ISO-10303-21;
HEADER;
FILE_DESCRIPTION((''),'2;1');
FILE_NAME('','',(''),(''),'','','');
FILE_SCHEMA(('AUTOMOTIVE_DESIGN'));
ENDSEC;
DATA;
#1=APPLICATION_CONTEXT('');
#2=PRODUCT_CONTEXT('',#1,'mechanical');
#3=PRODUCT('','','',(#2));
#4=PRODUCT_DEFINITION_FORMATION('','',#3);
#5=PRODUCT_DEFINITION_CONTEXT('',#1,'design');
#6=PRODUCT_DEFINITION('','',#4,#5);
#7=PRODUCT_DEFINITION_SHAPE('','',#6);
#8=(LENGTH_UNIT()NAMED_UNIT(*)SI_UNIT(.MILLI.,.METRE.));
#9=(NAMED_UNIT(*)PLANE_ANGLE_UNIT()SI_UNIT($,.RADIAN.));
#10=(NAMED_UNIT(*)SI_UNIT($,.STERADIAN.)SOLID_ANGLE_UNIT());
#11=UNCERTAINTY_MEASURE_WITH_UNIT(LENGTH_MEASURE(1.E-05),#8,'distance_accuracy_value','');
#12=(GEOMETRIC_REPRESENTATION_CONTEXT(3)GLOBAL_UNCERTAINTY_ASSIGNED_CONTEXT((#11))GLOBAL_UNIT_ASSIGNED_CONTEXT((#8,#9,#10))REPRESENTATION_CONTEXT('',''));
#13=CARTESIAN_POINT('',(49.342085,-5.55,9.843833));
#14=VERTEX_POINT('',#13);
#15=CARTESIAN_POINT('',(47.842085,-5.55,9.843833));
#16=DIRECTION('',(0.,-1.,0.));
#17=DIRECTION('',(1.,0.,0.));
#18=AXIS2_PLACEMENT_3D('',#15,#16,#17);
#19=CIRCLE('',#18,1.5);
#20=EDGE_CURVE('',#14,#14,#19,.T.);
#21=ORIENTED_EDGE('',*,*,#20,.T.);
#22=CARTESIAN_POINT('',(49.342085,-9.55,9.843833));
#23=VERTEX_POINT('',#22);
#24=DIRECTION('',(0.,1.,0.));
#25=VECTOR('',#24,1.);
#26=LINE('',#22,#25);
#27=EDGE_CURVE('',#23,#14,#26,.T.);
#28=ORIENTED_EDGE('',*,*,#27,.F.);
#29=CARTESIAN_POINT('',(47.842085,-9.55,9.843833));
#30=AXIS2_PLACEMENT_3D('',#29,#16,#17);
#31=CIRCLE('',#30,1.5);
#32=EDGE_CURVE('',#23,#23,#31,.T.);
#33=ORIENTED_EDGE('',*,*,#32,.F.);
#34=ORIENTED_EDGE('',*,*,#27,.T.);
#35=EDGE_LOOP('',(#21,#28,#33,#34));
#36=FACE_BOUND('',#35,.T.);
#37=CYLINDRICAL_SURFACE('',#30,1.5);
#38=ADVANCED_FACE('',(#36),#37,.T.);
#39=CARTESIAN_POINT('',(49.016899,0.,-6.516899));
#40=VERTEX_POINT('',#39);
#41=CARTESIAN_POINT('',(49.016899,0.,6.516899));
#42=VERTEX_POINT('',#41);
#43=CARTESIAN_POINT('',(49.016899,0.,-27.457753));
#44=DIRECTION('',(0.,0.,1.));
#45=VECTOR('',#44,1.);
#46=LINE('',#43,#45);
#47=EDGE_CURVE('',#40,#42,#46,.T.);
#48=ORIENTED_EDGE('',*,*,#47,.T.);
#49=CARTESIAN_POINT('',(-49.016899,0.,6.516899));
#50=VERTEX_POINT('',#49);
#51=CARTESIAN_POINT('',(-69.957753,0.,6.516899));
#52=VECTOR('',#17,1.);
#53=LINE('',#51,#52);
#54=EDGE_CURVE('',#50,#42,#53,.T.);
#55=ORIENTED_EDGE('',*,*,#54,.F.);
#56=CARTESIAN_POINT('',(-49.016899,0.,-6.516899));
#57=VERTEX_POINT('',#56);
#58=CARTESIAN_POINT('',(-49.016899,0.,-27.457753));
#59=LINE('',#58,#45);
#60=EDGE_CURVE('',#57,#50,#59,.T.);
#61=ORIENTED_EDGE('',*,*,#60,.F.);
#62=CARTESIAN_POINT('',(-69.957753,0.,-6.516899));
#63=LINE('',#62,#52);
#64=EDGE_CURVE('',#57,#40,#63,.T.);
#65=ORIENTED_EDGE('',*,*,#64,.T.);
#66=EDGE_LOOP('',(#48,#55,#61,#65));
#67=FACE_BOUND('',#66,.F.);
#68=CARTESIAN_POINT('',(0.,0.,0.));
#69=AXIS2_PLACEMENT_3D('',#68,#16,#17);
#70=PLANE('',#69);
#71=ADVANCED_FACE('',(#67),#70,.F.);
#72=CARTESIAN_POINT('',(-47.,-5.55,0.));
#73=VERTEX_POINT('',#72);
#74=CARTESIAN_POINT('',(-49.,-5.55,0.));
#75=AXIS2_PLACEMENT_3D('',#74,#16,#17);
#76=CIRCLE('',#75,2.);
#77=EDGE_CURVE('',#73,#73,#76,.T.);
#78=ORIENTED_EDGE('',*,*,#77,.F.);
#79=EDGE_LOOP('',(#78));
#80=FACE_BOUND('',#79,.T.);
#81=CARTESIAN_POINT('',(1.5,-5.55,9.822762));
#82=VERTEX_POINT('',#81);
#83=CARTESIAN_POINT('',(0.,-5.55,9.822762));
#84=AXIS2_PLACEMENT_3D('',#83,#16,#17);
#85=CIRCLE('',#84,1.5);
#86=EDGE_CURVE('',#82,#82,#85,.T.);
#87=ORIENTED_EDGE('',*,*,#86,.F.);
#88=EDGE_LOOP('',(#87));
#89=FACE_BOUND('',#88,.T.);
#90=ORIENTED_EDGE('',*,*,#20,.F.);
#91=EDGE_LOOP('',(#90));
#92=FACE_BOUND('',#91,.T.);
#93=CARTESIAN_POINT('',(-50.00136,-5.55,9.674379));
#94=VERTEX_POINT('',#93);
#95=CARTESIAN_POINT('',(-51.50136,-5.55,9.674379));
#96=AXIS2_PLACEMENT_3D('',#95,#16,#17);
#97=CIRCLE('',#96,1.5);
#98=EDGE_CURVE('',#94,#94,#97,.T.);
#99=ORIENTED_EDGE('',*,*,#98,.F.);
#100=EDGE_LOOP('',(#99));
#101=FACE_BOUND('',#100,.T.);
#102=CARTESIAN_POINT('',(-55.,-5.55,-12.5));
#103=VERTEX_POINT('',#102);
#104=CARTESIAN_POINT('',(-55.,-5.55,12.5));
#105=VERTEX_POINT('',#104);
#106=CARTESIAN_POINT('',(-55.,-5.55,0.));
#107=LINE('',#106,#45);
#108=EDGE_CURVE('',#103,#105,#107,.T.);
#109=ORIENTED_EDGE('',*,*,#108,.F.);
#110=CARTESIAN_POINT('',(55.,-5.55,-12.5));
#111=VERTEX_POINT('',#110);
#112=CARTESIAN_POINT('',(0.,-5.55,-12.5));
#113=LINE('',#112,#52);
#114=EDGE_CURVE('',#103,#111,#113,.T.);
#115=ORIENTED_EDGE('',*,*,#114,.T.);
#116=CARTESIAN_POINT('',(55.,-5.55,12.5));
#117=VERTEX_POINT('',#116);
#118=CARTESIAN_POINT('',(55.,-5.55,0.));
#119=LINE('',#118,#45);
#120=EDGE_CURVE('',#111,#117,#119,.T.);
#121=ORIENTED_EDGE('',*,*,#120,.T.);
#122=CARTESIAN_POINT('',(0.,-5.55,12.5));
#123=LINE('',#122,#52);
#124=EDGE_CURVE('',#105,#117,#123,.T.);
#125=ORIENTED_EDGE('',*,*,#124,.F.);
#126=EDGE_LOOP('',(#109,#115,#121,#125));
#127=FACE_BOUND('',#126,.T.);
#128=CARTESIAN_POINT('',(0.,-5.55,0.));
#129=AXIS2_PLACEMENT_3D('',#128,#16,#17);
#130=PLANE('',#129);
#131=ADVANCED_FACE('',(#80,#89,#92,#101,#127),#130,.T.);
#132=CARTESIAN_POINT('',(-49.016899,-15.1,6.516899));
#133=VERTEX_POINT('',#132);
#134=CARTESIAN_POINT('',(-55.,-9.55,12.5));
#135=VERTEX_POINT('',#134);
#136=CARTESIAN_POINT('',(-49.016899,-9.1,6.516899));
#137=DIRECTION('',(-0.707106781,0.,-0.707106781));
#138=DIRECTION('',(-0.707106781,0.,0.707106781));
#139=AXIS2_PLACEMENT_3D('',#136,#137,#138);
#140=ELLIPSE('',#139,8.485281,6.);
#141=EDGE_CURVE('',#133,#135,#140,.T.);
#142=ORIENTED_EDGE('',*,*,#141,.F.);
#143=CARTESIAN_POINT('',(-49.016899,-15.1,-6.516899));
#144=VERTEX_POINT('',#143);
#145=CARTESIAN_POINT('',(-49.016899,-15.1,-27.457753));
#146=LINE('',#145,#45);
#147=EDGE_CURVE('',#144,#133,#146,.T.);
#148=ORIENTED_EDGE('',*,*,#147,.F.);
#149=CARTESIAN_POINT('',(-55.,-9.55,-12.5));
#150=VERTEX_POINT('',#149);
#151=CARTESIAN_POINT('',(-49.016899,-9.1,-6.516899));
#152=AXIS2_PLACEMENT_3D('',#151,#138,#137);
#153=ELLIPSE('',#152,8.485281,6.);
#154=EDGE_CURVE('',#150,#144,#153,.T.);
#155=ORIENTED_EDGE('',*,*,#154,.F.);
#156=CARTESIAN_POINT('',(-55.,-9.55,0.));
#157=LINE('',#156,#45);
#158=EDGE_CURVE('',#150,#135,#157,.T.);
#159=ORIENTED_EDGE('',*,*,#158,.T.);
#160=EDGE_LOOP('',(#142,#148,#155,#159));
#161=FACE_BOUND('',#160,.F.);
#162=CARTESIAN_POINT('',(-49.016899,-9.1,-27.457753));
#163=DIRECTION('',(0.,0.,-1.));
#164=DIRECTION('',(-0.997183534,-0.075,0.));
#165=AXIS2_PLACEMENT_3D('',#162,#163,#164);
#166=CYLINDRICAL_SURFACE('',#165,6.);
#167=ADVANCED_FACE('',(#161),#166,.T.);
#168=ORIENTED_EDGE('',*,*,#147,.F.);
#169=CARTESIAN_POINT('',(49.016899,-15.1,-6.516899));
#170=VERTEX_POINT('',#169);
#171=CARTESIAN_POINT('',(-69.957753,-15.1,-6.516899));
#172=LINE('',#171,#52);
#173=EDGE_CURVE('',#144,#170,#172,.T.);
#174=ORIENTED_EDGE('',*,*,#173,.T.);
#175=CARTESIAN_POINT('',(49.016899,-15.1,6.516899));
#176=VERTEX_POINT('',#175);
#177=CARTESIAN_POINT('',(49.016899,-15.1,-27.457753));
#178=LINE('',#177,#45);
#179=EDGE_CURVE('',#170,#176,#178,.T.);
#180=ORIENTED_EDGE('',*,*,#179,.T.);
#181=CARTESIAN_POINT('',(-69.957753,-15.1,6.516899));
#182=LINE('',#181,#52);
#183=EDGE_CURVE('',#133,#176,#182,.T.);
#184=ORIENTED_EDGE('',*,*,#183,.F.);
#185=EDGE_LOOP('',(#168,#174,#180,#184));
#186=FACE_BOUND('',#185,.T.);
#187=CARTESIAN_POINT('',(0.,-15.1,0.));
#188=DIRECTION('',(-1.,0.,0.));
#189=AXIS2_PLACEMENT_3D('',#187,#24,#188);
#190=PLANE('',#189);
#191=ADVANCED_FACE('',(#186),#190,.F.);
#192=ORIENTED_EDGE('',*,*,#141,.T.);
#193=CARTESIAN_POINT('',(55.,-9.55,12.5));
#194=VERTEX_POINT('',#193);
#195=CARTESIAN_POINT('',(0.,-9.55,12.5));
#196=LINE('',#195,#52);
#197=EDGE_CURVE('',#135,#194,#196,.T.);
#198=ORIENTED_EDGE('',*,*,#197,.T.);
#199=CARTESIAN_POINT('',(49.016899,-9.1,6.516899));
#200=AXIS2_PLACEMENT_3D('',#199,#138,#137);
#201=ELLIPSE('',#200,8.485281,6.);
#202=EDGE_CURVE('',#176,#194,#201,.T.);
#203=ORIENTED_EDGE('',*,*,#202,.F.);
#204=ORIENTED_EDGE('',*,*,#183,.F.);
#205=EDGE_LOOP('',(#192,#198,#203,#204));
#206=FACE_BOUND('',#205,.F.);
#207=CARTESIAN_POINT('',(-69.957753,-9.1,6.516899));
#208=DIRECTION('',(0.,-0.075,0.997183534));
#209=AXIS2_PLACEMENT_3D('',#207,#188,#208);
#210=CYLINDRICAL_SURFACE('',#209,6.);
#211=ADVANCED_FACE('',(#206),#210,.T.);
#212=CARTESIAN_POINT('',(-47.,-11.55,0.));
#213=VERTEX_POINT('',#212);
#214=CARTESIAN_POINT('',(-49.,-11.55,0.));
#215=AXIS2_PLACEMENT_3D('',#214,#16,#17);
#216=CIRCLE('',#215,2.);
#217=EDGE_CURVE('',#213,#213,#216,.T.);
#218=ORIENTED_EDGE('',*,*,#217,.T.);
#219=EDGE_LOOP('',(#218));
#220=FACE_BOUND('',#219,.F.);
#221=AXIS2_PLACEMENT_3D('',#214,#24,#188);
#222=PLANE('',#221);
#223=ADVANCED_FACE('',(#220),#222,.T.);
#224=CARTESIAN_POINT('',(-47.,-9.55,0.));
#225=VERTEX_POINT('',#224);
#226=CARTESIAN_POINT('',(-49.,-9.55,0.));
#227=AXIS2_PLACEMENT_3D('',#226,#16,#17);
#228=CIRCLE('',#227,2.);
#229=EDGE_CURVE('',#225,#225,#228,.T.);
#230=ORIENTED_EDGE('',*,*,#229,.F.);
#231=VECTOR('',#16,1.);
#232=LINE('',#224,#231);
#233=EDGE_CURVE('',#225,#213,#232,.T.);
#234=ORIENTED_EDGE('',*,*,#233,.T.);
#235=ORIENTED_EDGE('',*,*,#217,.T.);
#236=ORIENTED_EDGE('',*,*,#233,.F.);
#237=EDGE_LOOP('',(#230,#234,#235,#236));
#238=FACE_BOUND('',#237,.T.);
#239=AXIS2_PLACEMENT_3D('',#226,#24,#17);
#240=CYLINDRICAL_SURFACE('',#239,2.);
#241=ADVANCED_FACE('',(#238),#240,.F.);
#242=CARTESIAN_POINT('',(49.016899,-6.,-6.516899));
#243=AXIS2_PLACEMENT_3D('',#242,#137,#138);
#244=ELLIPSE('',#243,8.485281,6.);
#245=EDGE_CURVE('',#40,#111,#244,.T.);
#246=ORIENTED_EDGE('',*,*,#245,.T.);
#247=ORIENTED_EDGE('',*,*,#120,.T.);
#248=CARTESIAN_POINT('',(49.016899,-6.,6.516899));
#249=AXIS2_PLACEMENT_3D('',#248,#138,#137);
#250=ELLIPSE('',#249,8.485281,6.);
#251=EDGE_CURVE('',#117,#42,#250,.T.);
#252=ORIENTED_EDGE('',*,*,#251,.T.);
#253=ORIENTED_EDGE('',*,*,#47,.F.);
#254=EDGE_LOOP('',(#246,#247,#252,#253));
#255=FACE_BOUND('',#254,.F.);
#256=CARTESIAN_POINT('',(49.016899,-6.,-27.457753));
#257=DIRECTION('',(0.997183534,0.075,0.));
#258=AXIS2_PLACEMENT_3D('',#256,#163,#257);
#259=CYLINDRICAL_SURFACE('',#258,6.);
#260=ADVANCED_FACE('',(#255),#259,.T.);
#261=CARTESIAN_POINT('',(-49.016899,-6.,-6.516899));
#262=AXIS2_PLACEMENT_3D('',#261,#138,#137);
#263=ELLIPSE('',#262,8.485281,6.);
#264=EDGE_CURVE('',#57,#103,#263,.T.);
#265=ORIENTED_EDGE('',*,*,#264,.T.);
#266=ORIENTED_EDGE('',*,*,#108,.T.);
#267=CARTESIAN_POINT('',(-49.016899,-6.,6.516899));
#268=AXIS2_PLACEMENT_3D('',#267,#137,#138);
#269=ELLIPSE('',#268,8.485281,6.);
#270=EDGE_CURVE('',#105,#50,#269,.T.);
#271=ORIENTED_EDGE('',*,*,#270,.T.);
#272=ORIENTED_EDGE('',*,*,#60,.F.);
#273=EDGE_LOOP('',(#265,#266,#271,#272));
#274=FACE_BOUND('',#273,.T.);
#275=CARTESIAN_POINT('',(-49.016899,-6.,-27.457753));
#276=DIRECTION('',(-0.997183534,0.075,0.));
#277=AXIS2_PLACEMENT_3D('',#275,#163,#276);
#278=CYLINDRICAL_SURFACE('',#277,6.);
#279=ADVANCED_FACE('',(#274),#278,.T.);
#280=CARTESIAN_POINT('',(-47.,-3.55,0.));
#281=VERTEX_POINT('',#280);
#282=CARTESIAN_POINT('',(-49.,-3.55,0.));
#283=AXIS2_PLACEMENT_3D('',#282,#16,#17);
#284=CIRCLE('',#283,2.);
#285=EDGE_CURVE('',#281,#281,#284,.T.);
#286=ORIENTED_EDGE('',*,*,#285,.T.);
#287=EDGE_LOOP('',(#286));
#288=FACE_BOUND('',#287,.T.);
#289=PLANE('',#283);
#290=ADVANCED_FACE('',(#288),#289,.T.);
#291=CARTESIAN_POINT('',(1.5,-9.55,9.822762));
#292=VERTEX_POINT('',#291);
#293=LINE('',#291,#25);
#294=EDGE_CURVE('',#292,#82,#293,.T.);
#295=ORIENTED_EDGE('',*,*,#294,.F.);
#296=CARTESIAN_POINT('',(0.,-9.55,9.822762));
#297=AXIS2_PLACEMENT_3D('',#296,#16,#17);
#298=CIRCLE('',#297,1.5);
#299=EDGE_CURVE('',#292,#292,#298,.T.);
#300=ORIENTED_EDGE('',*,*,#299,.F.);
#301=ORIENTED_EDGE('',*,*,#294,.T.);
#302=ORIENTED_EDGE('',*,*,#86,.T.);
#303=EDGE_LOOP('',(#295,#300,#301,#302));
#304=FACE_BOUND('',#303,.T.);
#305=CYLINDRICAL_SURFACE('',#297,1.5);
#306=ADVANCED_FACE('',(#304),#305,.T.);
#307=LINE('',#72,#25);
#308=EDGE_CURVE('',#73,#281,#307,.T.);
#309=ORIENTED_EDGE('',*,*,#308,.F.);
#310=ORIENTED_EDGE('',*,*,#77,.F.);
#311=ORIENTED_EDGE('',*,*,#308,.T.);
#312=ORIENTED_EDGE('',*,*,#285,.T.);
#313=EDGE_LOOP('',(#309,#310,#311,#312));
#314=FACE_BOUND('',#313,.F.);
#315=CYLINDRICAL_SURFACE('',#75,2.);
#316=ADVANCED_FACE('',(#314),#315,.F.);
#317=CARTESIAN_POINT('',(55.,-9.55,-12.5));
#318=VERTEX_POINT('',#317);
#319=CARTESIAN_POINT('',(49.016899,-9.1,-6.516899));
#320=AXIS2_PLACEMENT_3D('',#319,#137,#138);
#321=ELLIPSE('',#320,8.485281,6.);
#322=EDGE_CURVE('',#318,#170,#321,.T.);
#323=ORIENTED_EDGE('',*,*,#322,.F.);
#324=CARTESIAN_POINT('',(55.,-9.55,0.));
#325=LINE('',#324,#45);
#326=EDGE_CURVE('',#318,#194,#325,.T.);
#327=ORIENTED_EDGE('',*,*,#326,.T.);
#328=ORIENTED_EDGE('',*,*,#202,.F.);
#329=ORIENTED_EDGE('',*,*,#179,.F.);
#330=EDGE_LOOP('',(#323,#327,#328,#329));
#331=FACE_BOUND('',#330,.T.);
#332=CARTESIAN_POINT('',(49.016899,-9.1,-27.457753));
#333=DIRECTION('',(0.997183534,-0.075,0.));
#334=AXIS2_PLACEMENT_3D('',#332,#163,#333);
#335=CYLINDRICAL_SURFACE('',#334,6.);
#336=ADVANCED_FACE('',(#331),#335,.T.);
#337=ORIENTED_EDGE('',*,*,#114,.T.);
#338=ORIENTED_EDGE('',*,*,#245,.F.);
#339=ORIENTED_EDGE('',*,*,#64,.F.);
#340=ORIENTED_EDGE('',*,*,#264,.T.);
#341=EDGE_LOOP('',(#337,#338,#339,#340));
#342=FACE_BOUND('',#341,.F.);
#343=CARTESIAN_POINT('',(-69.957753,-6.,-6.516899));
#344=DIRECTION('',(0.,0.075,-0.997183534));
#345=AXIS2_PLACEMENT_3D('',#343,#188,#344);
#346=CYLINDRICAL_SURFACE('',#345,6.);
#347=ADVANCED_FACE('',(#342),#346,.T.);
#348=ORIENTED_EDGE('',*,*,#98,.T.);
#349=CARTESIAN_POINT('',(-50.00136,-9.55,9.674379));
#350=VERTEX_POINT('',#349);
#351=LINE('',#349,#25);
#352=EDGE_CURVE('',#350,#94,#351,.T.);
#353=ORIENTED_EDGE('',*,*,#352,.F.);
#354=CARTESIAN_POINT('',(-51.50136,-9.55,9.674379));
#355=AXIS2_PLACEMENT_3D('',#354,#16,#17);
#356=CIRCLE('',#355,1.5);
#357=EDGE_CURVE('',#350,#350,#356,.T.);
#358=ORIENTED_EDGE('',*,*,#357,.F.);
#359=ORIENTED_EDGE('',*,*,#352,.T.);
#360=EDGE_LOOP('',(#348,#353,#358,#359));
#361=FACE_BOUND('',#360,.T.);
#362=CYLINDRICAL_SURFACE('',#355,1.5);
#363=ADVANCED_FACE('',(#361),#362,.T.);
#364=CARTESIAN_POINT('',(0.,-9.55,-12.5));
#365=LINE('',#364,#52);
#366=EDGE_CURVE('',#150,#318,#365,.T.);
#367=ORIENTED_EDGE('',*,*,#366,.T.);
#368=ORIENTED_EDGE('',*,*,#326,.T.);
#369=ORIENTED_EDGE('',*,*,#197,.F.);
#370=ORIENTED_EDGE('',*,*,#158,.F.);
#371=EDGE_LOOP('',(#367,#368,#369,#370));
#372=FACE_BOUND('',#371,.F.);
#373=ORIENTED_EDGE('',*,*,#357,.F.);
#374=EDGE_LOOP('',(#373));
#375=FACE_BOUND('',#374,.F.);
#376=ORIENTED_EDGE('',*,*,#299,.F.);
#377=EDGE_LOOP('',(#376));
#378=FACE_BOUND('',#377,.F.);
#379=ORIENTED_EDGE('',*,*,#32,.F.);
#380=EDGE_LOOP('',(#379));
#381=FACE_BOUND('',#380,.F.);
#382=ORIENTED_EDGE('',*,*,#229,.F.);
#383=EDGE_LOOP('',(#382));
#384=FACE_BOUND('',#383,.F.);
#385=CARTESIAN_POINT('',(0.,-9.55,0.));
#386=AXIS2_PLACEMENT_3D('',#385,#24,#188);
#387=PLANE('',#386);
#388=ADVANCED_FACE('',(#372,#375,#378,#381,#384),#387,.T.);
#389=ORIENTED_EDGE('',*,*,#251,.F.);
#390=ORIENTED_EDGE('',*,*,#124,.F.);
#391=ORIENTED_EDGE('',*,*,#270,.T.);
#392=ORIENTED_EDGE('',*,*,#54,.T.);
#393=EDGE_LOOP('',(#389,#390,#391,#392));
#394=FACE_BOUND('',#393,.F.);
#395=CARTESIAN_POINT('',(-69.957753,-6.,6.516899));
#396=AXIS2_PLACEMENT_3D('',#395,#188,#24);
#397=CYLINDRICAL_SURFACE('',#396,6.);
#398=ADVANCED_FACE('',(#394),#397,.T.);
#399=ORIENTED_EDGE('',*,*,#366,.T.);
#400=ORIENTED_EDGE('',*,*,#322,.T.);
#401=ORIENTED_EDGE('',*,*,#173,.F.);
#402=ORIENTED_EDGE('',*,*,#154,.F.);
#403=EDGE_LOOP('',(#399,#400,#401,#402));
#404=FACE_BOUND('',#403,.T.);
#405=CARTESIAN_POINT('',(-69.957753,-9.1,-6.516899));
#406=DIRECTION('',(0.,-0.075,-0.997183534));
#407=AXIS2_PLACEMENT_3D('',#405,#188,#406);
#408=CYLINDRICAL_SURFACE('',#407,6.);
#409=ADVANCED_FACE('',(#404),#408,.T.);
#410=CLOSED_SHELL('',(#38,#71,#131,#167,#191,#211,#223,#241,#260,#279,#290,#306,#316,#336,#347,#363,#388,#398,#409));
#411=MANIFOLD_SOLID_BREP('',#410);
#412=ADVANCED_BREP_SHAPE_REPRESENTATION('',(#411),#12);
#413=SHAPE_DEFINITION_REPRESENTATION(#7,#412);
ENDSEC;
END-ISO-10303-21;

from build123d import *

# Parameters (mm, degrees)
F0_W        = 110
F0_H        = 25
F1_DEPTH    = 5.55
F2_R        = 2
F3_DEPTH    = 2
F4_R        = 1.5
F5_DEPTH    = 1
F6_DEPTH    = 2
F8_T1_DEPTH = 139.9155060128
F8_T3_DEPTH = 54.9155060128


# Not quite as in the source:
# - a fillet or chamfer that OpenCascade refuses, or shapes differently, is made with other operations: its cross-section is extruded or revolved along the edge and cut away or added


with BuildPart() as f1:
    # F0 (on Front) → F1 (new body)
    with BuildSketch(Plane.XZ):
        Rectangle(F0_W, F0_H)
    extrude(amount=F1_DEPTH)

    # F2 (on face) → F3 (cut)
    with BuildSketch(Plane.XZ.offset(5.55)):
        with Locations((-49, 0)):
            Circle(F2_R)
    extrude(amount=-F3_DEPTH, mode=Mode.SUBTRACT)

    # F4 (on face) → F5 (join)
    with BuildSketch(Plane.XZ.offset(5.55)):
        with Locations((0, 9.82276164)):
            Circle(F4_R)
        with Locations((-51.5013597906, 9.6743786708)):
            Circle(F4_R)
        with Locations((47.8420853615, 9.8438328132)):
            Circle(F4_R)
    extrude(amount=F5_DEPTH)

    # F4 (on face) → F6 (join)
    with BuildSketch(Plane.XZ.offset(5.55)):
        with Locations((0, 9.82276164)):
            Circle(F4_R)
        with Locations((-51.5013597906, 9.6743786708)):
            Circle(F4_R)
        with Locations((47.8420853615, 9.8438328132)):
            Circle(F4_R)
    extrude(amount=F6_DEPTH)

    # F7: F1 across face


with BuildPart() as f1_1:
    add(f1.part)
    add(f1.part.mirror(Plane(origin=(0, -7.55, 9.82276164), x_dir=(1, 0, 0), z_dir=(0, -1, 0))))

    # F8: fillet of radius 6 on 8 edges, made by hand

    # F8_s2 → F8_t1 (cut)
    with BuildSketch(Plane.YZ.offset(-69.9577530064)):
        with BuildLine():
            ThreePointArc((-9.55, -12.5), (-13.4988634896, -10.5973399501), (-15.1, -6.5168987974))
            Line((-15.1, -6.5168987974), (-15.1, -12.5))
            Line((-15.1, -12.5), (-9.55, -12.5))
        make_face()
        with BuildLine():
            ThreePointArc((-9.55, 12.5), (-13.4988634896, 10.5973399501), (-15.1, 6.5168987974))
            Line((-15.1, 6.5168987974), (-15.1, 12.5))
            Line((-15.1, 12.5), (-9.55, 12.5))
        make_face()
        with BuildLine():
            ThreePointArc((-5.55, -12.5), (-1.6011365104, -10.5973399501), (0, -6.5168987974))
            Line((0, -6.5168987974), (0, -12.5))
            Line((0, -12.5), (-5.55, -12.5))
        make_face()
        with BuildLine():
            ThreePointArc((0, 6.5168987974), (-1.6011365104, 10.5973399501), (-5.55, 12.5))
            Line((-5.55, 12.5), (0, 12.5))
            Line((0, 12.5), (0, 6.5168987974))
        make_face()
    extrude(amount=F8_T1_DEPTH, mode=Mode.SUBTRACT)

    # F8_s4 → F8_t3 (cut)
    with BuildSketch(Plane.XY.offset(-27.4577530064)):
        with BuildLine():
            ThreePointArc((55, -9.55), (53.0973399501, -13.4988634896), (49.0168987974, -15.1))
            Line((49.0168987974, -15.1), (55, -15.1))
            Line((55, -15.1), (55, -9.55))
        make_face()
        with BuildLine():
            ThreePointArc((-55, -9.55), (-53.0973399501, -13.4988634896), (-49.0168987974, -15.1))
            Line((-49.0168987974, -15.1), (-55, -15.1))
            Line((-55, -15.1), (-55, -9.55))
        make_face()
        with BuildLine():
            ThreePointArc((55, -5.55), (53.0973399501, -1.6011365104), (49.0168987974, 0))
            Line((49.0168987974, 0), (55, 0))
            Line((55, 0), (55, -5.55))
        make_face()
        with BuildLine():
            ThreePointArc((-55, -5.55), (-53.0973399501, -1.6011365104), (-49.0168987974, 0))
            Line((-49.0168987974, 0), (-55, 0))
            Line((-55, 0), (-55, -5.55))
        make_face()
    extrude(amount=F8_T3_DEPTH, mode=Mode.SUBTRACT)


solid = f1_1.part
